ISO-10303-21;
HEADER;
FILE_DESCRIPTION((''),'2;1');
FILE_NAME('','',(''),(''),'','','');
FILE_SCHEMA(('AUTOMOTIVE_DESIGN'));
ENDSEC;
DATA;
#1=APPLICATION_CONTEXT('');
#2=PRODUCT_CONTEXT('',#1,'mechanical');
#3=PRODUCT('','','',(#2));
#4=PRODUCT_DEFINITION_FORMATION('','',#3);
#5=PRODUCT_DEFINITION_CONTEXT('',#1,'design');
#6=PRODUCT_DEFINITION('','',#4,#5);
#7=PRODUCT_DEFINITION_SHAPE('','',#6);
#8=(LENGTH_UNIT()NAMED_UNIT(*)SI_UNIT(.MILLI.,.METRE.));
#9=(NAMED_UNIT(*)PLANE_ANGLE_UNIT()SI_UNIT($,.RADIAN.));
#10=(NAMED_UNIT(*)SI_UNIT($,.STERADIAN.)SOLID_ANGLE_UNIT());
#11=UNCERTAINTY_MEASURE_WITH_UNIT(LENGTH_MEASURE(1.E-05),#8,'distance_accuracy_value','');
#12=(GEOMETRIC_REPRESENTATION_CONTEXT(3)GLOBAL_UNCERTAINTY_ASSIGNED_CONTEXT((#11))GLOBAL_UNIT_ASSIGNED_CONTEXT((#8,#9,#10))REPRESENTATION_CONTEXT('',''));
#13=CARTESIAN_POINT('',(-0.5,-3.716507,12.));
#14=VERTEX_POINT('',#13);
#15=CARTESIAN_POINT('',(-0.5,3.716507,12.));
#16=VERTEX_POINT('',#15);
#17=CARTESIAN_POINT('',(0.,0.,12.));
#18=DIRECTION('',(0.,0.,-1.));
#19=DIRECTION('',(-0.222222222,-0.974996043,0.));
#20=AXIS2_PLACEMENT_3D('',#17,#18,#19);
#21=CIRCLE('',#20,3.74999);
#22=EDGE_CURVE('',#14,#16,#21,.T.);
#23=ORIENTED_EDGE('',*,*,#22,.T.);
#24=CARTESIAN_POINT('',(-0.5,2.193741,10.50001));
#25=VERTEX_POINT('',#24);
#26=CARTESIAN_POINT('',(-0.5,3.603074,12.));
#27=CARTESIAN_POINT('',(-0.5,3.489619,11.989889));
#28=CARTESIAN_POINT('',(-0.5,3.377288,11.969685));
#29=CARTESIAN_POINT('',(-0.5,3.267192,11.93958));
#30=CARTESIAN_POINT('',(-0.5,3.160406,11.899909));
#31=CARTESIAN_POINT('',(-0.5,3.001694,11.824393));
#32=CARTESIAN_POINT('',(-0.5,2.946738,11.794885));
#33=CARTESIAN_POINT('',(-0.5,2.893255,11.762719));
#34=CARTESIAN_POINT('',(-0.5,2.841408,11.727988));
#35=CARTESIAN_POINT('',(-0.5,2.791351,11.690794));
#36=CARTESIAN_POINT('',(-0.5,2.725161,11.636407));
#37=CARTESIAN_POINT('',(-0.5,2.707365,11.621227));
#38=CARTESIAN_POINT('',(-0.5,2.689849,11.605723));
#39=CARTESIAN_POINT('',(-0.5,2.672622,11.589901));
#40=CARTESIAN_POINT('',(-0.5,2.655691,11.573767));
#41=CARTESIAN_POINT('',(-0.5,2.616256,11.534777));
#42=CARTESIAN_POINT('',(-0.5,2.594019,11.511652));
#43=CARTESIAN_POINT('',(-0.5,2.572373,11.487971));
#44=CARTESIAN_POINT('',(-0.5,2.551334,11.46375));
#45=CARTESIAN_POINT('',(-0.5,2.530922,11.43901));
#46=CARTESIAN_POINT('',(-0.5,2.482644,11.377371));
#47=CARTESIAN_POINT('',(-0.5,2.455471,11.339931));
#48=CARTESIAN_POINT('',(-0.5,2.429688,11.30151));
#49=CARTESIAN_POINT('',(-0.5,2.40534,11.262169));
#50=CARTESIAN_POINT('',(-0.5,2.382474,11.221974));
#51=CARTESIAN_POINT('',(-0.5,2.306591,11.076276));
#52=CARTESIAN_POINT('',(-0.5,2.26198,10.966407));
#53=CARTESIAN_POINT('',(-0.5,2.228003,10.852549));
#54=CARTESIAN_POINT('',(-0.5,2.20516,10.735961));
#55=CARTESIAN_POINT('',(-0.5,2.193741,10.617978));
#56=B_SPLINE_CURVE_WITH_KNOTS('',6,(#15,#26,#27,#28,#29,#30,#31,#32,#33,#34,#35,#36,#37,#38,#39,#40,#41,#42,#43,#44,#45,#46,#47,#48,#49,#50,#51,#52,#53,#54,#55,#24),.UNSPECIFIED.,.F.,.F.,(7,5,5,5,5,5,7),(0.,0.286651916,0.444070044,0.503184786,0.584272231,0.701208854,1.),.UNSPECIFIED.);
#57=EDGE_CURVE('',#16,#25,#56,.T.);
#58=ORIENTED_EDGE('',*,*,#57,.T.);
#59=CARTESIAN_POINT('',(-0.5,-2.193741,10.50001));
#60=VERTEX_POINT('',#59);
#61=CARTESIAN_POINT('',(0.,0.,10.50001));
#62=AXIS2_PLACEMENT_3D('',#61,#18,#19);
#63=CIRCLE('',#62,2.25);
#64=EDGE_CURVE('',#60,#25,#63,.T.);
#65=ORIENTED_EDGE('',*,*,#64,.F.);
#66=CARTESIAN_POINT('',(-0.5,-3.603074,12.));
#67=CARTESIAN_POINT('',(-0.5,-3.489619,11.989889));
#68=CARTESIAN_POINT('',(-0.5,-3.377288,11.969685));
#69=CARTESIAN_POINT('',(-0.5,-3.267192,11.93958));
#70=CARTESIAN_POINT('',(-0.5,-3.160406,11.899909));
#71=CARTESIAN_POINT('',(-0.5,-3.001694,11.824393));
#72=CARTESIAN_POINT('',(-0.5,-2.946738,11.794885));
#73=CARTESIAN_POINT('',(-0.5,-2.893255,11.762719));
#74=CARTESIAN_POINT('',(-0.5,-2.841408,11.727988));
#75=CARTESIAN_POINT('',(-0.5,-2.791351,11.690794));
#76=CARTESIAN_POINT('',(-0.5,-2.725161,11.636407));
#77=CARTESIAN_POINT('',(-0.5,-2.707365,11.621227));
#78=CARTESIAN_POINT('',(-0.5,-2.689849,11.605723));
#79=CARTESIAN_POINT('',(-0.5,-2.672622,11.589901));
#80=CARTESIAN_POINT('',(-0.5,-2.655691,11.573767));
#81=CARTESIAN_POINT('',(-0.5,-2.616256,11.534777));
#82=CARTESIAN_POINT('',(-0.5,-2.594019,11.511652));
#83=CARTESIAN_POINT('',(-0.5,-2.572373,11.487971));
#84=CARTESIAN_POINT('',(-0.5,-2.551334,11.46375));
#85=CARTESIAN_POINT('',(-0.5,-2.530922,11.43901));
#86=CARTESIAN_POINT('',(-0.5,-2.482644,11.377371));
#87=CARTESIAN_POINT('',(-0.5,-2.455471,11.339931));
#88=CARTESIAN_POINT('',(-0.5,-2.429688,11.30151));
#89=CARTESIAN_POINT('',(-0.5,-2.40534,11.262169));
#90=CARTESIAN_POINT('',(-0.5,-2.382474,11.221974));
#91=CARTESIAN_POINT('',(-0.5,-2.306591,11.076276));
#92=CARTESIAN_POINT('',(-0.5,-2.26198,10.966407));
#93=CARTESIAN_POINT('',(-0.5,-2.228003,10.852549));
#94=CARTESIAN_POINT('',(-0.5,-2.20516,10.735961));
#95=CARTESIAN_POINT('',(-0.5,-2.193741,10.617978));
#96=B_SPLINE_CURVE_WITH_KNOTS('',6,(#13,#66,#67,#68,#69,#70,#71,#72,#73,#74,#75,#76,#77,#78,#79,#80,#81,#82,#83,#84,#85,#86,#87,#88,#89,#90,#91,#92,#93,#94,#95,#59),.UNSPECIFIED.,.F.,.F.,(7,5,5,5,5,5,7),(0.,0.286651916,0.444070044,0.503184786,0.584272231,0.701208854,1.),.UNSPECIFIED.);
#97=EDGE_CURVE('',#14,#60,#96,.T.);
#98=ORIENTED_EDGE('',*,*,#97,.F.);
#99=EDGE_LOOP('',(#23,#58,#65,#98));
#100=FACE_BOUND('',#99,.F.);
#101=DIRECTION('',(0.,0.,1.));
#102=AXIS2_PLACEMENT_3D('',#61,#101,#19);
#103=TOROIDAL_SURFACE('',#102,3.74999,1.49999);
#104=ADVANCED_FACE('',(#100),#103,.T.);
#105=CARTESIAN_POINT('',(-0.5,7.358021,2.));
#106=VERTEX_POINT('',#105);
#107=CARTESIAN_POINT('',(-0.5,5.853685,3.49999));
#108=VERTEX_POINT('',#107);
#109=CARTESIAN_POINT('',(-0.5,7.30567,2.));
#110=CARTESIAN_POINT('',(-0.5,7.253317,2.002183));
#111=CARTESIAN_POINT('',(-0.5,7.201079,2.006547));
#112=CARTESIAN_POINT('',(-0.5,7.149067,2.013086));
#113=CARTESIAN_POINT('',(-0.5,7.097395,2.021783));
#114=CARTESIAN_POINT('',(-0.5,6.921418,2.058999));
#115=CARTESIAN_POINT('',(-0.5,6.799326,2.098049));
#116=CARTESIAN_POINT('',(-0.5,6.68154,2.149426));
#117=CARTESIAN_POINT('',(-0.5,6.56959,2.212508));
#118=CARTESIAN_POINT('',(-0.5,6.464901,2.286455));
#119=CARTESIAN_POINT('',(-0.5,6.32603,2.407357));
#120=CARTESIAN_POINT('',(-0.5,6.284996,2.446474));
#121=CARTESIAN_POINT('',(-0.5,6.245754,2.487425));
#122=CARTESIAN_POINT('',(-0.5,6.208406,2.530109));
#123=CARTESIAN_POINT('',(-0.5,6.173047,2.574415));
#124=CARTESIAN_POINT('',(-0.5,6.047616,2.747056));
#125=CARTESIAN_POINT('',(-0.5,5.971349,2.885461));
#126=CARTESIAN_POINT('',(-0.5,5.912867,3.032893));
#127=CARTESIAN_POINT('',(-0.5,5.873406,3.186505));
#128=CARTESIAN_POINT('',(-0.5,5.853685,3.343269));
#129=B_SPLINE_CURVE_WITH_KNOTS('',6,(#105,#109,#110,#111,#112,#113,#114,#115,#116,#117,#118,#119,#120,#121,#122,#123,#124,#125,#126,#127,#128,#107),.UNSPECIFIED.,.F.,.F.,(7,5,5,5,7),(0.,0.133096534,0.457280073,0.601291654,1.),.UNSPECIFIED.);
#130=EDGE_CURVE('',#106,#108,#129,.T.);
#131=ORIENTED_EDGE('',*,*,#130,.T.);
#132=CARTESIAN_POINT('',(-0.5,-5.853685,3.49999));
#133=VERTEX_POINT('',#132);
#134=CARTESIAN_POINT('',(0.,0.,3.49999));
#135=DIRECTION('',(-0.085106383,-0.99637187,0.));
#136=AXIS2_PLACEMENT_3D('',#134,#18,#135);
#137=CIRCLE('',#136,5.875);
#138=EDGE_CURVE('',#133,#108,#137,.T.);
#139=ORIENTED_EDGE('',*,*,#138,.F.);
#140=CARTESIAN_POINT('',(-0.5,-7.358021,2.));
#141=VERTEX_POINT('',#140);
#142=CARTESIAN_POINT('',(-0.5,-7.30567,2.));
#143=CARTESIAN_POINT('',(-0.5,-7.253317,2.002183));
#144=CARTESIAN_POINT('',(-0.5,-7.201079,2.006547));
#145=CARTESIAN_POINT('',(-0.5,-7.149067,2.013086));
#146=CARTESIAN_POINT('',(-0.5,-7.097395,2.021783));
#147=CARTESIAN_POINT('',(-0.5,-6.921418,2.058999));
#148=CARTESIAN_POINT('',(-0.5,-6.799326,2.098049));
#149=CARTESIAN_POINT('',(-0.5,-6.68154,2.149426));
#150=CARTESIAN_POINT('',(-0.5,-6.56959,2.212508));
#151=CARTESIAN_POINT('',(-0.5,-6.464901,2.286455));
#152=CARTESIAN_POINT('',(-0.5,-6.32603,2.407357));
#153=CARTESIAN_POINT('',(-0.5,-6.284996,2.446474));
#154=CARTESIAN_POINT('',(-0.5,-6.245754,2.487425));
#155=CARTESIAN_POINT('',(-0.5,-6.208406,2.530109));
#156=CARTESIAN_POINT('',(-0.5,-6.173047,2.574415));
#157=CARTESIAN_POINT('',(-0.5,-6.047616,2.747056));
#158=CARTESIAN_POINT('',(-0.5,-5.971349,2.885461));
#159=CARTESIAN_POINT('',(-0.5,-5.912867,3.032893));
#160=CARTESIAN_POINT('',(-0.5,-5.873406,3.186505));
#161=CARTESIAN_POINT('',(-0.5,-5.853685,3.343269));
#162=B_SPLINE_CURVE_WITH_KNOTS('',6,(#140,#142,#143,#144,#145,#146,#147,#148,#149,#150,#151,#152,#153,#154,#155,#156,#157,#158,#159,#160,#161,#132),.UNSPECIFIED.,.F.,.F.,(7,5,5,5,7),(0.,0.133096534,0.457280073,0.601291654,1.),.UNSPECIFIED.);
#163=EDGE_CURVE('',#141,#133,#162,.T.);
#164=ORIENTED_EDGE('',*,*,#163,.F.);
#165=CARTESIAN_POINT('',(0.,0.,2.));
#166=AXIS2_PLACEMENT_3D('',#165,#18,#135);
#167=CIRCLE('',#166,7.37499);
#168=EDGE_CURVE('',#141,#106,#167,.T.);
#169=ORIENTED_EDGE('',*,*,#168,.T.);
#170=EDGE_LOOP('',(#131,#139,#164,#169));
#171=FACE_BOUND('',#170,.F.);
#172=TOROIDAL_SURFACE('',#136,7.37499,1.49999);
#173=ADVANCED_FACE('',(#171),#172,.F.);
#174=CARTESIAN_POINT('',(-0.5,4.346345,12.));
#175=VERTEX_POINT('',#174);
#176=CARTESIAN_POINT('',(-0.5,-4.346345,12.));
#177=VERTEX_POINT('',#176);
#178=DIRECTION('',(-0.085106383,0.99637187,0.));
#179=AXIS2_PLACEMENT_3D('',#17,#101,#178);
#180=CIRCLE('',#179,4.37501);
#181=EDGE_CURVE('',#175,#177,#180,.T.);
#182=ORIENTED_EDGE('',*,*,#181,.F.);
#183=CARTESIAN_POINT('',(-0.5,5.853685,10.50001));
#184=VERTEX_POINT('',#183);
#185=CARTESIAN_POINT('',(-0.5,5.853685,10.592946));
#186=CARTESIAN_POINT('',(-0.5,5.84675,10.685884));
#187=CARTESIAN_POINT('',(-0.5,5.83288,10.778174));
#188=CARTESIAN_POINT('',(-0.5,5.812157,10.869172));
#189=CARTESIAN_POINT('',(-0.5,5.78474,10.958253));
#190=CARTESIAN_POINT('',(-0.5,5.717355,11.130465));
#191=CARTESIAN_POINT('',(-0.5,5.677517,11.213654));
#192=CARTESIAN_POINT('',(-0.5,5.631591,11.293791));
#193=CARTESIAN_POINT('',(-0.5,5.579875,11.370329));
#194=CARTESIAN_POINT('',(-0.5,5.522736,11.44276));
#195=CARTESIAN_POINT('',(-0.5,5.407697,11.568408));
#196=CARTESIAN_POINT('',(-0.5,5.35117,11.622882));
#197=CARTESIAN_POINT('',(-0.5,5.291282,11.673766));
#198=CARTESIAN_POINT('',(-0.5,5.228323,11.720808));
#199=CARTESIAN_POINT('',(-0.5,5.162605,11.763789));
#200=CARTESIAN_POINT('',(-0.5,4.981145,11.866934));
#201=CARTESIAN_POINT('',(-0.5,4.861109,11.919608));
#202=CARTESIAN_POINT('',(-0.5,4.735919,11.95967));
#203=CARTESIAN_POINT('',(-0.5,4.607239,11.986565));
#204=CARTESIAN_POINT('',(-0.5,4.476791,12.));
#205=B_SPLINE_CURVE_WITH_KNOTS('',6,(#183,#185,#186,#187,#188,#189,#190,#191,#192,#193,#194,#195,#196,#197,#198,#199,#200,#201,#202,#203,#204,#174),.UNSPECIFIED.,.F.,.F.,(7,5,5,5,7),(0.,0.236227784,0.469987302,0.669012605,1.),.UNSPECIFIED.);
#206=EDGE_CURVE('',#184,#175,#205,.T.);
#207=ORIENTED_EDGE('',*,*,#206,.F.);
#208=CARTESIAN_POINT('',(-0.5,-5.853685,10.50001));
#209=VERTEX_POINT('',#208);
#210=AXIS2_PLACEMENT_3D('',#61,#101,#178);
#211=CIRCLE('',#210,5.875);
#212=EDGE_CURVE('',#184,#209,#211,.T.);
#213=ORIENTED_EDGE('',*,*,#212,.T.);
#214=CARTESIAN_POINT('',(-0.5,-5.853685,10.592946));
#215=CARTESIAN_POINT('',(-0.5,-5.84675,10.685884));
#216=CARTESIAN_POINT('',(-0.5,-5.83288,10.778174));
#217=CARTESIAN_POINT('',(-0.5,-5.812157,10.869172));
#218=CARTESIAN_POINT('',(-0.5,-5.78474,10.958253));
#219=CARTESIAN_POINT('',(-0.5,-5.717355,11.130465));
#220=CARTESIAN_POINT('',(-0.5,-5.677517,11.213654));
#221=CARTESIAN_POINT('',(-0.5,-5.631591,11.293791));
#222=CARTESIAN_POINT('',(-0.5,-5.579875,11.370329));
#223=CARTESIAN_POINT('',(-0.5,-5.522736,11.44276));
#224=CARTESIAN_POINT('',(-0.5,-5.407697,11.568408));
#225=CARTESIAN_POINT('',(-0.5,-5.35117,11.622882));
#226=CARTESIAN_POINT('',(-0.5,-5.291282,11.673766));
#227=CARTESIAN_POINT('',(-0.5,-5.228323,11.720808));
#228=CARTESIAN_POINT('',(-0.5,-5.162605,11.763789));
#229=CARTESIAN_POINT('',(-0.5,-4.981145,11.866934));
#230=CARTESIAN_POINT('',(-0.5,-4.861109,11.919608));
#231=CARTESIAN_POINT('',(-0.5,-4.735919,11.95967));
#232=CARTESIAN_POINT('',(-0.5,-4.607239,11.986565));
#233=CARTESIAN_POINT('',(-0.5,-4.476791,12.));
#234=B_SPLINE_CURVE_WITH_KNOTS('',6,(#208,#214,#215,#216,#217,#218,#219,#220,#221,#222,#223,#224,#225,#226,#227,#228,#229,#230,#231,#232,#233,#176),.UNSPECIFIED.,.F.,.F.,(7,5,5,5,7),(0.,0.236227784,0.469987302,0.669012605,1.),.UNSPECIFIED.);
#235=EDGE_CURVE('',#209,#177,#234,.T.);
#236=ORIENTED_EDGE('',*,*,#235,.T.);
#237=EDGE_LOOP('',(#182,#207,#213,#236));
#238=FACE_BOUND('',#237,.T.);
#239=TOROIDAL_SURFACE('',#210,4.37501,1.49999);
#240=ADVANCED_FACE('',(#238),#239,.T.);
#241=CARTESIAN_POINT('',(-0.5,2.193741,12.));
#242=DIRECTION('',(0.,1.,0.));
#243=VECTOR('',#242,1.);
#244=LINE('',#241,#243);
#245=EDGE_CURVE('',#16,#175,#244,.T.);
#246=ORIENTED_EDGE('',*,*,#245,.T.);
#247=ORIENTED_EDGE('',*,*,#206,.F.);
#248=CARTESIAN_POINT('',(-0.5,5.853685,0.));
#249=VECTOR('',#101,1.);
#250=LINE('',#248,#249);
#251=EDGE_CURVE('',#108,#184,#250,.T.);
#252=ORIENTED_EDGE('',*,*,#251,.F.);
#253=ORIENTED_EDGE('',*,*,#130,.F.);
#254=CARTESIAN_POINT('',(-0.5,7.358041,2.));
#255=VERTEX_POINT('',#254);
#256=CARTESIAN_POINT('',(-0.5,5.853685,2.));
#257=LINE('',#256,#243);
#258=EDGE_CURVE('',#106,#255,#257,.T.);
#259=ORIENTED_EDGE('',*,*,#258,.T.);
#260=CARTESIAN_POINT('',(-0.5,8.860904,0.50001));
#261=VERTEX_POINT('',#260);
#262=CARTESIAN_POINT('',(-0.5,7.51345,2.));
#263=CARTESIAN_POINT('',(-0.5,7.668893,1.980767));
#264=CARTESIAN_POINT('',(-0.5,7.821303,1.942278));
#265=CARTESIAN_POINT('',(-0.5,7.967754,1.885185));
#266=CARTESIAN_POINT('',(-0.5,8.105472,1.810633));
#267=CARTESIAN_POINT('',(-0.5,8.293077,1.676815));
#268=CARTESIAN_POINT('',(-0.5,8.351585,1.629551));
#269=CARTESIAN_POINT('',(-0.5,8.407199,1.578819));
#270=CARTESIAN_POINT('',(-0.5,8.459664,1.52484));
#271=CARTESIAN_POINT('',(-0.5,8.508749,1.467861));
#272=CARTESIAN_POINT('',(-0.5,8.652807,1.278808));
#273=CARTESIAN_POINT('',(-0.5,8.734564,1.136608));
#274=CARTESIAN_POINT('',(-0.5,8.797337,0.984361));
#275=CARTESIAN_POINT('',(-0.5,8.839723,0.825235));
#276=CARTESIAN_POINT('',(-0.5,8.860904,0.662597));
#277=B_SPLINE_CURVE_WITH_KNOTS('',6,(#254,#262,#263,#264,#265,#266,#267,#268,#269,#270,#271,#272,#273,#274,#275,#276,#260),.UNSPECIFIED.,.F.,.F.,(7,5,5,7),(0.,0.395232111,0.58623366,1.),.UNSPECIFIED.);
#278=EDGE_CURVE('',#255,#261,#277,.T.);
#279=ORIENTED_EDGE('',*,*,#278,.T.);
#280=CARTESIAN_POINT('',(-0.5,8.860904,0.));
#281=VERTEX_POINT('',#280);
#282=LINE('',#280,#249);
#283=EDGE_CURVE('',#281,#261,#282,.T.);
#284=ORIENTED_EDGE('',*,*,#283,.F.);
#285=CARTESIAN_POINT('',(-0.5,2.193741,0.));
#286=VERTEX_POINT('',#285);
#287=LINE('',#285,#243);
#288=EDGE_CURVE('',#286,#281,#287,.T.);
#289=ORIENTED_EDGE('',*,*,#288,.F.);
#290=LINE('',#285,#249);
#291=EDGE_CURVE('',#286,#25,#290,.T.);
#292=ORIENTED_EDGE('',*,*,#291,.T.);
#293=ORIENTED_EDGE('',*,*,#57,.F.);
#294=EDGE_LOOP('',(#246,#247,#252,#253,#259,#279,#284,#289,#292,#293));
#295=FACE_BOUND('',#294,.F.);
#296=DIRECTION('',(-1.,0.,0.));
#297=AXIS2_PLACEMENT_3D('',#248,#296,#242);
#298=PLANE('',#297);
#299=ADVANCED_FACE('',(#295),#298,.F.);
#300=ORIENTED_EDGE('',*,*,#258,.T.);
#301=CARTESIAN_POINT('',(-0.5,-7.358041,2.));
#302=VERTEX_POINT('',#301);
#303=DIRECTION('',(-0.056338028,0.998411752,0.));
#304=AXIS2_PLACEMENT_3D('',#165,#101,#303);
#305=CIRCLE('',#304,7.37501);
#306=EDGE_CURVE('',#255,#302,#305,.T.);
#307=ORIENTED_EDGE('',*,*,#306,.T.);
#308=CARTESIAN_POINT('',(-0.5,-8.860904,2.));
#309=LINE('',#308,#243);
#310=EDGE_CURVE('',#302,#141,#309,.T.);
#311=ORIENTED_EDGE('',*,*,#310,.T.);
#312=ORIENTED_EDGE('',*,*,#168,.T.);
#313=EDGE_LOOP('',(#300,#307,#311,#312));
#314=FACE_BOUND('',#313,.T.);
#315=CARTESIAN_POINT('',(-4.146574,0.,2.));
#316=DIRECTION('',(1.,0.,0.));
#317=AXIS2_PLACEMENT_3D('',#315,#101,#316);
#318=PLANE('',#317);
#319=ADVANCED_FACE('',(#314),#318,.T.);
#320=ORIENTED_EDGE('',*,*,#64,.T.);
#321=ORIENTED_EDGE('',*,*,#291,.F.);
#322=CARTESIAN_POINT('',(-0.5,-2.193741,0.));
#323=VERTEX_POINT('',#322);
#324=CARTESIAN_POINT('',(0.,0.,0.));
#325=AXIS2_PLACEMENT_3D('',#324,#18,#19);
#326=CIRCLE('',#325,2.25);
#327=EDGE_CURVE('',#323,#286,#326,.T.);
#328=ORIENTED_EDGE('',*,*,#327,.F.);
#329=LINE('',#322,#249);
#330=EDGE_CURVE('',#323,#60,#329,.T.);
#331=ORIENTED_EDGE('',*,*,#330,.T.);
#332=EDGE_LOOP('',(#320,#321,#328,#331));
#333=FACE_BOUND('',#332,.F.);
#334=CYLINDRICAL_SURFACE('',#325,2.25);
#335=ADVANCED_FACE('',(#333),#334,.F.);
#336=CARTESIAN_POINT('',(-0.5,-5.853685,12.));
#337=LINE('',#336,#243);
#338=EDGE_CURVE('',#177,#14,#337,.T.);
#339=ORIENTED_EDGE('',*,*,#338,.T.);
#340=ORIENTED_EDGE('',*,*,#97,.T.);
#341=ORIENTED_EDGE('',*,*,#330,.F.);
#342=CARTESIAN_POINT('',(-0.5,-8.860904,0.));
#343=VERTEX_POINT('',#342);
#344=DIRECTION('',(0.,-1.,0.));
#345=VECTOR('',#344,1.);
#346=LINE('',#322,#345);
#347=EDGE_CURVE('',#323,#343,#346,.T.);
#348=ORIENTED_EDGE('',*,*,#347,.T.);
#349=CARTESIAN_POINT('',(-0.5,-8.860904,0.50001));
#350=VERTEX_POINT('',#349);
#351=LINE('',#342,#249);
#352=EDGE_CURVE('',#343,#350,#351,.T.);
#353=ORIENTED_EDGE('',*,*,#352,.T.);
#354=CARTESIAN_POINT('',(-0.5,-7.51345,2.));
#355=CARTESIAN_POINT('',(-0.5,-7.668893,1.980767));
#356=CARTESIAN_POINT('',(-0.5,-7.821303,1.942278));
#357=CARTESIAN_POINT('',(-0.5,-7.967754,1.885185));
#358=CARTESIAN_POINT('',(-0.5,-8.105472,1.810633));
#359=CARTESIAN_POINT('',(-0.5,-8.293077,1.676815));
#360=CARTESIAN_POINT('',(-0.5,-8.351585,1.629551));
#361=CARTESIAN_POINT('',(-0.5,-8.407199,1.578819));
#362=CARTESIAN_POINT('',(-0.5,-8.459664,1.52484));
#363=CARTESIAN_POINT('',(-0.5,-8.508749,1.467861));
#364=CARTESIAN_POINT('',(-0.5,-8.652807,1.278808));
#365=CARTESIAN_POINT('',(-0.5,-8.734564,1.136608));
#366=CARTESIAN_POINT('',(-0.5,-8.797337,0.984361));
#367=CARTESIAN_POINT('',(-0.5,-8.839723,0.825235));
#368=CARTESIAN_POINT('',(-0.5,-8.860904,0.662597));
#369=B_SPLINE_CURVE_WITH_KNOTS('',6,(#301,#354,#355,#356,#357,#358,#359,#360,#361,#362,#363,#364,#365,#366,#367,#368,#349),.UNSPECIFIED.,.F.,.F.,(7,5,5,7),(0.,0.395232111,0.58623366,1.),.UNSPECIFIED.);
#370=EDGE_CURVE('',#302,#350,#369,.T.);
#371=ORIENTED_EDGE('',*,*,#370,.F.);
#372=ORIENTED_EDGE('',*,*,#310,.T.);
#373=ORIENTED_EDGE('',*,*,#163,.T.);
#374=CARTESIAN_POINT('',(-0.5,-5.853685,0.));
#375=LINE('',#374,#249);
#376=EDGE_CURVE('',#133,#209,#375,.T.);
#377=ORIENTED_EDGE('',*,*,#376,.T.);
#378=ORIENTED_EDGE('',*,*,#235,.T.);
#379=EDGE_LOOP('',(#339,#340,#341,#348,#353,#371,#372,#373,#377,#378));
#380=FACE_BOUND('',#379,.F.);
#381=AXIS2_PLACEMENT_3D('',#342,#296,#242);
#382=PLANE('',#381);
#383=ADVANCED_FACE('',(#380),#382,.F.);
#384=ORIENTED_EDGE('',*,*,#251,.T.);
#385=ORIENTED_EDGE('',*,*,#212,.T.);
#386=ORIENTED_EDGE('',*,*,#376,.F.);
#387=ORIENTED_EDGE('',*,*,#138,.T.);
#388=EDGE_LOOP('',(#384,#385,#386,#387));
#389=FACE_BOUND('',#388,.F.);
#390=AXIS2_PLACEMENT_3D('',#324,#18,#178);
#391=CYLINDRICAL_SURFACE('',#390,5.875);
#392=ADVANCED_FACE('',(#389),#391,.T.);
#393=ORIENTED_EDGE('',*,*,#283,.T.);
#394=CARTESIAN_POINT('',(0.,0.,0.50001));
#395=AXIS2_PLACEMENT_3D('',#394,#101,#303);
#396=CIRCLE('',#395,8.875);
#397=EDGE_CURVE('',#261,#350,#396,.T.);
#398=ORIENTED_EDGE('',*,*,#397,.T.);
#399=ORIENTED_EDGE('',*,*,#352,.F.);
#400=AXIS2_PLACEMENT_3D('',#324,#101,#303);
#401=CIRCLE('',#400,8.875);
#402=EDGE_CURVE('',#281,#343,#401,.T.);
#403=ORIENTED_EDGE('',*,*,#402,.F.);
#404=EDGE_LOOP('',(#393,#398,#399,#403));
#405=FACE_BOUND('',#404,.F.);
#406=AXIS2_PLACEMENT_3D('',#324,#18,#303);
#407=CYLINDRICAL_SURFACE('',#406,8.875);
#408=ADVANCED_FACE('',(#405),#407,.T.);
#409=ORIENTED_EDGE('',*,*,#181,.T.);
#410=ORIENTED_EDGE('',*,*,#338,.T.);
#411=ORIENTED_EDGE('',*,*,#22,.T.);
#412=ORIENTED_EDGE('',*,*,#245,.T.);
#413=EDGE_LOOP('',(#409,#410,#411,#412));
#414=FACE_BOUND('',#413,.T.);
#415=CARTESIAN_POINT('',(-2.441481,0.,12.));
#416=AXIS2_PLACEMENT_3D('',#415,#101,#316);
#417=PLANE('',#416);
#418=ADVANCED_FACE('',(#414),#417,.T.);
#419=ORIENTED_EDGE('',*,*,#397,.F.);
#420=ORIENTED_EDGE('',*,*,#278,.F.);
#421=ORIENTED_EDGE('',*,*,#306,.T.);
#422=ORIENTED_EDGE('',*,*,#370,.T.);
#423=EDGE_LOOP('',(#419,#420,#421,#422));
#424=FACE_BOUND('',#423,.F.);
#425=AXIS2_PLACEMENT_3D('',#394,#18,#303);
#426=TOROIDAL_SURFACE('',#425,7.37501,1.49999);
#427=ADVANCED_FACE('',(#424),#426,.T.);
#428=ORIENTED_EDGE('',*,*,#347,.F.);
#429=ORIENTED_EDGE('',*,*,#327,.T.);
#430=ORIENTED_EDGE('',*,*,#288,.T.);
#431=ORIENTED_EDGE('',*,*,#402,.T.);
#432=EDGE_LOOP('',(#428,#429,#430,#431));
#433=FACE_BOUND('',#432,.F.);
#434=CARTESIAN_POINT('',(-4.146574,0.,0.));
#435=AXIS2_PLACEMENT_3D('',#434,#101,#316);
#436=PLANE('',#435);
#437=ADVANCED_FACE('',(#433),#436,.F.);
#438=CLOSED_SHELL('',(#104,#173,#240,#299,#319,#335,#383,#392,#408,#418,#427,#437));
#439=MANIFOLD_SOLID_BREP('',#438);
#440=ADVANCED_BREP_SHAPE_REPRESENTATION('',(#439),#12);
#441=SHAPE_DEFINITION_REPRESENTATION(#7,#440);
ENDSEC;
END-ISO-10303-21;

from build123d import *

# Parameters (mm, degrees)
F1_DEPTH = 12
F2_DEPTH = 2
F3_R     = 1.49999


# Not quite as in the source:
# - a fillet or chamfer is up to 0.001 mm smaller than in the source, because OpenCascade refuses the exact size


with BuildPart() as f1:
    # F0 (on Top) → F1 (new body)
    with BuildSketch(Plane.XY):
        with BuildLine():
            ThreePointArc((-0.5, -2.1937410968), (-2.25, 0), (-0.5, 2.1937410968))
            Line((-0.5, 2.1937410968), (-0.5, 5.853684737))
            ThreePointArc((-0.5, 5.853684737), (-5.875, 0), (-0.5, -5.853684737))
            Line((-0.5, -5.853684737), (-0.5, -2.1937410968))
        make_face()
    extrude(amount=F1_DEPTH)

    # F0 (on Top) → F2 (join)
    with BuildSketch(Plane.XY):
        with BuildLine():
            ThreePointArc((-0.5, -5.853684737), (-5.875, 0), (-0.5, 5.853684737))
            Line((-0.5, 5.853684737), (-0.5, 8.8609042992))
            ThreePointArc((-0.5, 8.8609042992), (-8.875, 0), (-0.5, -8.8609042992))
            Line((-0.5, -8.8609042992), (-0.5, -5.853684737))
        make_face()
    extrude(amount=F2_DEPTH)

    # F3 (radius 1.5 in the source; OpenCascade refuses exactly that, so slightly less here)
    f3_edges = [f1.edges().sort_by_distance(p)[0] for p in [
        (-5.875, 0, 2),
        (-8.875, 0, 2),
        (-5.875, 0, 12),
        (-2.25, 0, 12),
    ]]
    fillet(f3_edges, radius=F3_R)


solid = f1.part
